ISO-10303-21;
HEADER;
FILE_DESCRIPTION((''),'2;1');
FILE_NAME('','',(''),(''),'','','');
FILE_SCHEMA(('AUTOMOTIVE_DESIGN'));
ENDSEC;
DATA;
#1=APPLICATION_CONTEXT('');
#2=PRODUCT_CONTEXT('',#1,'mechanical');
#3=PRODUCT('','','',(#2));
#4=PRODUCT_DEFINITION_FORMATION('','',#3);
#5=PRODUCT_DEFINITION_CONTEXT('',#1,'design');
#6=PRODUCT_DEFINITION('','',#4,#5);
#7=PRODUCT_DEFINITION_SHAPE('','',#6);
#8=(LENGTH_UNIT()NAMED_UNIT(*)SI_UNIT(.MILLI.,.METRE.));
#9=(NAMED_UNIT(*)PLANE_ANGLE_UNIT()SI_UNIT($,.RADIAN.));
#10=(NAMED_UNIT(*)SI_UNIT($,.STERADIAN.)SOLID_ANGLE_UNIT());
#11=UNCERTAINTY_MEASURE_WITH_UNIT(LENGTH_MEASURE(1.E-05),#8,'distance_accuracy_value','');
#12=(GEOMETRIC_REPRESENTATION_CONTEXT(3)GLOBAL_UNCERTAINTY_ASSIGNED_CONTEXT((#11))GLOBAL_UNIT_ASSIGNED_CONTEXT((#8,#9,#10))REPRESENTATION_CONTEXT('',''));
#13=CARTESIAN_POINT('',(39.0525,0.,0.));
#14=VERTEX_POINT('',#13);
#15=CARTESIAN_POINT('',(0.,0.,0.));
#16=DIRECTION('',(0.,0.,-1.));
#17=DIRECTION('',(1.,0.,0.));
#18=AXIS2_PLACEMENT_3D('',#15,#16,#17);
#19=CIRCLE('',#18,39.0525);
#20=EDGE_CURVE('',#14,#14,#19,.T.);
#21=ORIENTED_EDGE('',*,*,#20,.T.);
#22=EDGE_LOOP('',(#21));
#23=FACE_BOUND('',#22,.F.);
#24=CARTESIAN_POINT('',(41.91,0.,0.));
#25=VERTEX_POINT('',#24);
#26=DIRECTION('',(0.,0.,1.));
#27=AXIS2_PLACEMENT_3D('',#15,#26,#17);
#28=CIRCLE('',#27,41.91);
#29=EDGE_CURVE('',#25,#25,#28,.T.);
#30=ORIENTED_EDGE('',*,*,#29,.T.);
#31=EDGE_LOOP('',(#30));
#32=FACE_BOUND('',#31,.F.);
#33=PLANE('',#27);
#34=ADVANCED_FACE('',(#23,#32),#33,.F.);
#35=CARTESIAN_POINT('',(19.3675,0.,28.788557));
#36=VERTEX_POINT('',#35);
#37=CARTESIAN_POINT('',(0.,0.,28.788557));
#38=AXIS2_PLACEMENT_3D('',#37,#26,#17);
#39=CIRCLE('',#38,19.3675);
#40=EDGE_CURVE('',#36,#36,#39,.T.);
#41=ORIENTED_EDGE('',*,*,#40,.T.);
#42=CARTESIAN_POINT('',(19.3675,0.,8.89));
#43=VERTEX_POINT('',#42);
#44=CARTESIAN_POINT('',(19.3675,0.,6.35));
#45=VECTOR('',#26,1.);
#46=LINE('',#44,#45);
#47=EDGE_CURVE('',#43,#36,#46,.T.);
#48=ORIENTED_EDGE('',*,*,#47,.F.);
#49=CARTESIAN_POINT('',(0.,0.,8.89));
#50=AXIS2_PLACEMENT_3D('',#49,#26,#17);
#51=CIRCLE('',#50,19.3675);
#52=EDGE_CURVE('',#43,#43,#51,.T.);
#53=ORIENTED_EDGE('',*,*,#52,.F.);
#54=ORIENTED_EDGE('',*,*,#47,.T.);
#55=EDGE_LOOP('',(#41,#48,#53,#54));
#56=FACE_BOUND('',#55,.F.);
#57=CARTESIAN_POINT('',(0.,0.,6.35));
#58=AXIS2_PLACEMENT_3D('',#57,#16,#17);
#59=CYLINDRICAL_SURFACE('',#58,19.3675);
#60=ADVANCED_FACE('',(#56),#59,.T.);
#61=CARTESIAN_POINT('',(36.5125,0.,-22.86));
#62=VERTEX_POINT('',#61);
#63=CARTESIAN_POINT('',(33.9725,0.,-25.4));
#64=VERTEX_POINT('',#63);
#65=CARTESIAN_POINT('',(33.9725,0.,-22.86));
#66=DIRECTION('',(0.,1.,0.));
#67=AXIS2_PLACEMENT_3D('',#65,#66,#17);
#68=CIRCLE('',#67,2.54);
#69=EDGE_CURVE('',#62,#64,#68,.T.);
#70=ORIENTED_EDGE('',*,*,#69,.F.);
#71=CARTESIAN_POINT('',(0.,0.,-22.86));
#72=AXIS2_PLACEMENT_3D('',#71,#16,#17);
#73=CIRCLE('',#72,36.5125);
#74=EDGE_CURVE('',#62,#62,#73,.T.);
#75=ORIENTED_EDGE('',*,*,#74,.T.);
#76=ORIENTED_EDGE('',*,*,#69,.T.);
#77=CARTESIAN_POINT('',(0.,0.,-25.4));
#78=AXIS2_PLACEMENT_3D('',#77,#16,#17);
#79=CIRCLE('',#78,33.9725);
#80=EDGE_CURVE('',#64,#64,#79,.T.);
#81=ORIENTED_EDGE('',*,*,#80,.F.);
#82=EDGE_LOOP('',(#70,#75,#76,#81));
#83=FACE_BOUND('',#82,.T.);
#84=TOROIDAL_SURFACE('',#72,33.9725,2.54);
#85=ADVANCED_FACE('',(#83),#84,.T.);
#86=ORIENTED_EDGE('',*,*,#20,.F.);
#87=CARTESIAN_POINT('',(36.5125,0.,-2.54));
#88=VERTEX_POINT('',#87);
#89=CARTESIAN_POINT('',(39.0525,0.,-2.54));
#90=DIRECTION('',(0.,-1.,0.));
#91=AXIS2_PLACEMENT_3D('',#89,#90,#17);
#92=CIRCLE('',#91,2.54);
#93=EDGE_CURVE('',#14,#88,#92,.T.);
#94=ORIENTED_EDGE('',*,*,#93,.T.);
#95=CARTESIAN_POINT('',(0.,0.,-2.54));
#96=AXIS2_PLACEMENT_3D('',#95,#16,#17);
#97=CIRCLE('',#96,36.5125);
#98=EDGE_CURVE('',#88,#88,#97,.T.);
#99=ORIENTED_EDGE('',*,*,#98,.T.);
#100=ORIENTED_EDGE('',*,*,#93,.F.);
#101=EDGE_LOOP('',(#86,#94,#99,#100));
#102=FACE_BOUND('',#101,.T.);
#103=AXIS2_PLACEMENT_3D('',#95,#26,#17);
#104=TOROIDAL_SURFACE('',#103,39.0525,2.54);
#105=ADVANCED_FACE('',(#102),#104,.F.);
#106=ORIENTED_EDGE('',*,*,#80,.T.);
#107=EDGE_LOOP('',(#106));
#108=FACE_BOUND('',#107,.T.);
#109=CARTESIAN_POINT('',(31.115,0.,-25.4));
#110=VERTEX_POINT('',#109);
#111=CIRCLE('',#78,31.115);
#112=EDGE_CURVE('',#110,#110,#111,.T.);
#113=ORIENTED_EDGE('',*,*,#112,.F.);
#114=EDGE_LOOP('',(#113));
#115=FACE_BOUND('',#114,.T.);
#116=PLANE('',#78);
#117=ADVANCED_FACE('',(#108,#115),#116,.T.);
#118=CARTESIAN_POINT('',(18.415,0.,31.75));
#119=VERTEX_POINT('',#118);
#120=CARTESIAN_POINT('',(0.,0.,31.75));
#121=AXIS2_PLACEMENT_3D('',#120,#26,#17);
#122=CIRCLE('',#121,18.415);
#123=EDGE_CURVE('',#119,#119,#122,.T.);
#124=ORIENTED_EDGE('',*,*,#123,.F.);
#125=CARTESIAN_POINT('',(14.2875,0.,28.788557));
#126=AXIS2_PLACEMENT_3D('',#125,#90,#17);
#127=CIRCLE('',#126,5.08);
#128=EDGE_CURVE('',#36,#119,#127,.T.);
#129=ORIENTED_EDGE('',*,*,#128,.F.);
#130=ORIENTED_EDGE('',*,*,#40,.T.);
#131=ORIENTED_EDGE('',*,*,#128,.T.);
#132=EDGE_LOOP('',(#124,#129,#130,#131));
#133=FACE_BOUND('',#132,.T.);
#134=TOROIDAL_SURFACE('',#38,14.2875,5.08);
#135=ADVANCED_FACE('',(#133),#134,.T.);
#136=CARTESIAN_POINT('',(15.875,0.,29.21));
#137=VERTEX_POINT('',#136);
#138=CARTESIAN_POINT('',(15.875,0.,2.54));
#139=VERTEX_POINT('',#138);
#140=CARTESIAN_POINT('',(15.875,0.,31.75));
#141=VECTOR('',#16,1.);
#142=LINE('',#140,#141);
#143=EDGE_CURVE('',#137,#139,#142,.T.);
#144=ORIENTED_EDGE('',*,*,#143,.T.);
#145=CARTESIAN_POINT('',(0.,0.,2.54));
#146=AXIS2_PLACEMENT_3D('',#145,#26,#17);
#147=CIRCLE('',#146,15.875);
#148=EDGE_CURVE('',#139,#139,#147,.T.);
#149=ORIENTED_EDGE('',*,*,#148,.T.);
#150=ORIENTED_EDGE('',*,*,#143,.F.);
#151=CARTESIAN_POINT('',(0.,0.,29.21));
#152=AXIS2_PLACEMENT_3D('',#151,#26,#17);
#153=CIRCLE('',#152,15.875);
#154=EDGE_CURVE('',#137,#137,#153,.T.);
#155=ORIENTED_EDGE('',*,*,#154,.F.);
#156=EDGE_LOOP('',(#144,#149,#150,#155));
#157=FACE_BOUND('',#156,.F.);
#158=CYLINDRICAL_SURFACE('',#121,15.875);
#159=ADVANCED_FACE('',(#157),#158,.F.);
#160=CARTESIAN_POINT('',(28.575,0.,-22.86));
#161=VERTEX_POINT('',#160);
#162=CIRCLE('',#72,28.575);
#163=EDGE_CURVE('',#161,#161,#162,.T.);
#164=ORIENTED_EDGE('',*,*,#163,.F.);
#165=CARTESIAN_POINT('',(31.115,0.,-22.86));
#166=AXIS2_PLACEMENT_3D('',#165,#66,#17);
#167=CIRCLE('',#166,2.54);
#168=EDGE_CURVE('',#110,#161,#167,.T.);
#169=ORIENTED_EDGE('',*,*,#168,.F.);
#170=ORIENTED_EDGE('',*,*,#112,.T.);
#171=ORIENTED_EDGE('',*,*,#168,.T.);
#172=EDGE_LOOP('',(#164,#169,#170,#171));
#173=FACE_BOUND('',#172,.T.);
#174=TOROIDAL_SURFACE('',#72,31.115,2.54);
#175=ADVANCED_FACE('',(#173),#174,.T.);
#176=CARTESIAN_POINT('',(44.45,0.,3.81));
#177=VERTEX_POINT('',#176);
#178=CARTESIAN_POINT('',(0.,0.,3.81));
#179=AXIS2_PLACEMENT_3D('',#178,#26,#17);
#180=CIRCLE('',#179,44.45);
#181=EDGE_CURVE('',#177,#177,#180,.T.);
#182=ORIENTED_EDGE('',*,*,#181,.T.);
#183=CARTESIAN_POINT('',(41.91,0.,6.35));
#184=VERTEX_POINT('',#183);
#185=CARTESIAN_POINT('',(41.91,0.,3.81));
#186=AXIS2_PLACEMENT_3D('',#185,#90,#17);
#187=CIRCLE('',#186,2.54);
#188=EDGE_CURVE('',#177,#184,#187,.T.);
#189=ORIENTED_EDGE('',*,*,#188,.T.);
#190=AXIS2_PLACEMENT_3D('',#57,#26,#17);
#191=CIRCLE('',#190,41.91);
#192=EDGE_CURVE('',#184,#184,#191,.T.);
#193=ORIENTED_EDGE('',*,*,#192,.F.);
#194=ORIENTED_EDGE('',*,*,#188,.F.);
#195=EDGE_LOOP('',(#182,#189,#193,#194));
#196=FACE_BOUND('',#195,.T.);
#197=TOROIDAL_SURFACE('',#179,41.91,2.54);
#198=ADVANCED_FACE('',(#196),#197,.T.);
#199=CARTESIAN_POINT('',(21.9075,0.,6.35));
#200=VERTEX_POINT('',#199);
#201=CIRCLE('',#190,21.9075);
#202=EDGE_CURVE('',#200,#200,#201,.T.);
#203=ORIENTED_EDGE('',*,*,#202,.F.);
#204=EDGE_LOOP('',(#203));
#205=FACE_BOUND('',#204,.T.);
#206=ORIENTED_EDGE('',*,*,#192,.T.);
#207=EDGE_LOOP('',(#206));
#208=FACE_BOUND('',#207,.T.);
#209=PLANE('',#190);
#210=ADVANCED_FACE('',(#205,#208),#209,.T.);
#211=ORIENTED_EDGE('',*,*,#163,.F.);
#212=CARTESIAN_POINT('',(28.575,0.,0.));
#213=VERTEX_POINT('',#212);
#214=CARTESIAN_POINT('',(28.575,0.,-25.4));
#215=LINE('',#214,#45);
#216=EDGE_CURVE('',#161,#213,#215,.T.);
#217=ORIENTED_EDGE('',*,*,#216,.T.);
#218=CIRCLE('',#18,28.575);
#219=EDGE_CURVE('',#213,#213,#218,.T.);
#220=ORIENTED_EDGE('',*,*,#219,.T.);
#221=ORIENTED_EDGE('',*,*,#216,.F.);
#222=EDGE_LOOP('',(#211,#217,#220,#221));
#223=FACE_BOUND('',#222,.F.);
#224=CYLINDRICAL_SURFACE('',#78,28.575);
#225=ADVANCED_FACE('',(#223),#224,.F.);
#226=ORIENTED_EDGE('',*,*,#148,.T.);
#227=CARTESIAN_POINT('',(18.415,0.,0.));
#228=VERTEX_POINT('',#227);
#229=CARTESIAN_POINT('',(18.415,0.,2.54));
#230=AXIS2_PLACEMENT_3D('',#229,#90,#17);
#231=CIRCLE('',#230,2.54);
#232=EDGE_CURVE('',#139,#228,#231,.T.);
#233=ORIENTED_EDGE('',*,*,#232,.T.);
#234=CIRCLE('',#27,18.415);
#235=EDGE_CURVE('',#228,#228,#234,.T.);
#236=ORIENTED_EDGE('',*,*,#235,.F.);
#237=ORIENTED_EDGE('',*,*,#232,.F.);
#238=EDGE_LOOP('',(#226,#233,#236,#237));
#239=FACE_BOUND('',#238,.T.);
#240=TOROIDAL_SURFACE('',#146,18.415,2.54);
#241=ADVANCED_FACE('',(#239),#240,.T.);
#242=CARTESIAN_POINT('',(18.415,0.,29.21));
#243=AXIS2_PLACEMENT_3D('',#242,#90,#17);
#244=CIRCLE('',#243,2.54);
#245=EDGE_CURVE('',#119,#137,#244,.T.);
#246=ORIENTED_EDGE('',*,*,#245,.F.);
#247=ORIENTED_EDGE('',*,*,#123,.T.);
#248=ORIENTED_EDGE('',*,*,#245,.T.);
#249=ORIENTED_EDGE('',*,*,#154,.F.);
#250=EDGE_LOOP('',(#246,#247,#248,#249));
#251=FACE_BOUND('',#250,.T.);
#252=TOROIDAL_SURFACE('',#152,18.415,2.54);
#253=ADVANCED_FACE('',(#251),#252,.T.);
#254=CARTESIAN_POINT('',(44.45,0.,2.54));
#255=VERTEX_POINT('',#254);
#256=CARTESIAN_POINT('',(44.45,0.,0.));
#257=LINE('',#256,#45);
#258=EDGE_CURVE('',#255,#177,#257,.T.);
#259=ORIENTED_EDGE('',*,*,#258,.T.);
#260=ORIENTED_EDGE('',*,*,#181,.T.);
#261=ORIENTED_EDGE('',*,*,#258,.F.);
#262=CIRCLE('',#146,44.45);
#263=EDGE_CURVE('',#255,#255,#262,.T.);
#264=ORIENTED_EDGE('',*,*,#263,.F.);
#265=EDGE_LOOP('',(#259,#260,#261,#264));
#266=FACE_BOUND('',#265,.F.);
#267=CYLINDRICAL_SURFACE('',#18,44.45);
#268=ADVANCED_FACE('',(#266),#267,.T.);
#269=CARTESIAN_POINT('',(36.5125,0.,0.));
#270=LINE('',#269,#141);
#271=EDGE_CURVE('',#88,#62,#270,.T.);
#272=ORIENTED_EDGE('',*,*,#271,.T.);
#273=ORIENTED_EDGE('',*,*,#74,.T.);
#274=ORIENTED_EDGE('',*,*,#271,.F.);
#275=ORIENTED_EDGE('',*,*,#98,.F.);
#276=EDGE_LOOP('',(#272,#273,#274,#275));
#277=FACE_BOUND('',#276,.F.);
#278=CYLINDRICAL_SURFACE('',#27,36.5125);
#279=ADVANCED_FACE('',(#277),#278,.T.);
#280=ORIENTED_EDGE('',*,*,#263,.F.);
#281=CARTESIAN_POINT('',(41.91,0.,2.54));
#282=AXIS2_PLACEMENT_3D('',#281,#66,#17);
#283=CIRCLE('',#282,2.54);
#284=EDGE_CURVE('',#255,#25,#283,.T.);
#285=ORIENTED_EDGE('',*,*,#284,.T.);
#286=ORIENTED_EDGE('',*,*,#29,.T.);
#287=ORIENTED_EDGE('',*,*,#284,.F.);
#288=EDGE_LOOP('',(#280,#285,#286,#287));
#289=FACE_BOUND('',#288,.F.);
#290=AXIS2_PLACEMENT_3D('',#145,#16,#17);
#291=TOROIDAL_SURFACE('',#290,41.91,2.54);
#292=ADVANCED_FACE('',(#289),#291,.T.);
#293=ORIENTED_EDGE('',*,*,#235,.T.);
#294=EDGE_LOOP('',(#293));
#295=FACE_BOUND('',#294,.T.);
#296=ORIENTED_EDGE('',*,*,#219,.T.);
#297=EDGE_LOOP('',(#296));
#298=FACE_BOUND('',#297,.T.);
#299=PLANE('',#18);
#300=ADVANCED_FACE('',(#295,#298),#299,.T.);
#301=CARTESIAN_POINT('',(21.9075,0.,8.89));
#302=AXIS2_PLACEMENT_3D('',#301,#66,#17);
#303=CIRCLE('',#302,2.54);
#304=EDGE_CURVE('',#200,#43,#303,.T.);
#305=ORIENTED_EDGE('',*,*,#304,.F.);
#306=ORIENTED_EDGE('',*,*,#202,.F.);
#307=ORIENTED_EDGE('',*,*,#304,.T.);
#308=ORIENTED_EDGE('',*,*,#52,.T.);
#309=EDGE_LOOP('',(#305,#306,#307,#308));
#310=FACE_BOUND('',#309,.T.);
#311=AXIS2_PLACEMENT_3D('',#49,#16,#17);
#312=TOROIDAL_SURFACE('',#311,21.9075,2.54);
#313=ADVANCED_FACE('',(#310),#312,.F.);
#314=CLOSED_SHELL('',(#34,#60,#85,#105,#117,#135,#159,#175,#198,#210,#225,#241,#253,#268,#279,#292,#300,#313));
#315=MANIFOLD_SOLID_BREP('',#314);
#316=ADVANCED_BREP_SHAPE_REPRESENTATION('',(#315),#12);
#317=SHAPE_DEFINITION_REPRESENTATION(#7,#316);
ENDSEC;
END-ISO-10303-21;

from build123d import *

# Parameters (mm, degrees)
F0_R     = 44.45
F1_DEPTH = 6.35
F2_R     = 36.5125
F3_DEPTH = 25.4
F4_R     = 19.3675
F5_DEPTH = 25.4
F6_R     = 15.875
F7_DEPTH = 31.75
F8_R     = 28.575
F9_DEPTH = 25.4
F10_R    = 2.54


# Not quite as in the source:
# - a fillet or chamfer that OpenCascade refuses, or shapes differently, is made with other operations: its cross-section is extruded or revolved along the edge and cut away or added


with BuildPart() as f1:
    # F0 (on Top) → F1 (new body)
    with BuildSketch(Plane.XY):
        Circle(F0_R)
    extrude(amount=F1_DEPTH)

    # F2 (on face) → F3 (join)
    with BuildSketch(Plane(origin=(0, 0, 0), x_dir=(1, 0, 0), z_dir=(0, 0, -1))):
        Circle(F2_R)
    extrude(amount=F3_DEPTH)

    # F4 (on face) → F5 (join)
    with BuildSketch(Plane.XY.offset(6.35)):
        Circle(F4_R)
    extrude(amount=F5_DEPTH)

    # F6 (on face) → F7 (cut, through all)
    with BuildSketch(Plane.XY.offset(31.75)):
        Circle(F6_R)
    extrude(amount=-F7_DEPTH, mode=Mode.SUBTRACT)

    # F8 (on face) → F9 (cut, through all)
    with BuildSketch(Plane(origin=(0, 0, -25.4), x_dir=(1, 0, 0), z_dir=(0, 0, -1))):
        Circle(F8_R)
    extrude(amount=-F9_DEPTH, mode=Mode.SUBTRACT)

    # F10
    f10_edges = [f1.edges().sort_by_distance(p)[0] for p in [
        (-36.5125, 0, -25.4),
        (-28.575, 0, -25.4),
        (-15.875, 0, 0),
        (-15.875, 0, 31.75),
        (-36.5125, 0, 0),
        (-44.45, 0, 0),
        (-44.45, 0, 6.35),
        (-19.3675, 0, 6.35),
    ]]
    fillet(f10_edges, radius=F10_R)

    # F11: fillet of radius 5.08 on 1 edges, made by hand

    # F11_s1 → F11_t2 (revolve, cut)
    with BuildSketch(Plane.XZ):
        with BuildLine():
            ThreePointArc((19.3675, 28.7885571506), (19.1235159222, 30.3439831373), (18.415, 31.75))
            Line((18.415, 31.75), (19.3675, 31.75))
            Line((19.3675, 31.75), (19.3675, 28.7885571506))
        make_face()
    revolve(axis=Axis((0, 0, 31.75), (0, 0, 1)), mode=Mode.SUBTRACT)


solid = f1.part
